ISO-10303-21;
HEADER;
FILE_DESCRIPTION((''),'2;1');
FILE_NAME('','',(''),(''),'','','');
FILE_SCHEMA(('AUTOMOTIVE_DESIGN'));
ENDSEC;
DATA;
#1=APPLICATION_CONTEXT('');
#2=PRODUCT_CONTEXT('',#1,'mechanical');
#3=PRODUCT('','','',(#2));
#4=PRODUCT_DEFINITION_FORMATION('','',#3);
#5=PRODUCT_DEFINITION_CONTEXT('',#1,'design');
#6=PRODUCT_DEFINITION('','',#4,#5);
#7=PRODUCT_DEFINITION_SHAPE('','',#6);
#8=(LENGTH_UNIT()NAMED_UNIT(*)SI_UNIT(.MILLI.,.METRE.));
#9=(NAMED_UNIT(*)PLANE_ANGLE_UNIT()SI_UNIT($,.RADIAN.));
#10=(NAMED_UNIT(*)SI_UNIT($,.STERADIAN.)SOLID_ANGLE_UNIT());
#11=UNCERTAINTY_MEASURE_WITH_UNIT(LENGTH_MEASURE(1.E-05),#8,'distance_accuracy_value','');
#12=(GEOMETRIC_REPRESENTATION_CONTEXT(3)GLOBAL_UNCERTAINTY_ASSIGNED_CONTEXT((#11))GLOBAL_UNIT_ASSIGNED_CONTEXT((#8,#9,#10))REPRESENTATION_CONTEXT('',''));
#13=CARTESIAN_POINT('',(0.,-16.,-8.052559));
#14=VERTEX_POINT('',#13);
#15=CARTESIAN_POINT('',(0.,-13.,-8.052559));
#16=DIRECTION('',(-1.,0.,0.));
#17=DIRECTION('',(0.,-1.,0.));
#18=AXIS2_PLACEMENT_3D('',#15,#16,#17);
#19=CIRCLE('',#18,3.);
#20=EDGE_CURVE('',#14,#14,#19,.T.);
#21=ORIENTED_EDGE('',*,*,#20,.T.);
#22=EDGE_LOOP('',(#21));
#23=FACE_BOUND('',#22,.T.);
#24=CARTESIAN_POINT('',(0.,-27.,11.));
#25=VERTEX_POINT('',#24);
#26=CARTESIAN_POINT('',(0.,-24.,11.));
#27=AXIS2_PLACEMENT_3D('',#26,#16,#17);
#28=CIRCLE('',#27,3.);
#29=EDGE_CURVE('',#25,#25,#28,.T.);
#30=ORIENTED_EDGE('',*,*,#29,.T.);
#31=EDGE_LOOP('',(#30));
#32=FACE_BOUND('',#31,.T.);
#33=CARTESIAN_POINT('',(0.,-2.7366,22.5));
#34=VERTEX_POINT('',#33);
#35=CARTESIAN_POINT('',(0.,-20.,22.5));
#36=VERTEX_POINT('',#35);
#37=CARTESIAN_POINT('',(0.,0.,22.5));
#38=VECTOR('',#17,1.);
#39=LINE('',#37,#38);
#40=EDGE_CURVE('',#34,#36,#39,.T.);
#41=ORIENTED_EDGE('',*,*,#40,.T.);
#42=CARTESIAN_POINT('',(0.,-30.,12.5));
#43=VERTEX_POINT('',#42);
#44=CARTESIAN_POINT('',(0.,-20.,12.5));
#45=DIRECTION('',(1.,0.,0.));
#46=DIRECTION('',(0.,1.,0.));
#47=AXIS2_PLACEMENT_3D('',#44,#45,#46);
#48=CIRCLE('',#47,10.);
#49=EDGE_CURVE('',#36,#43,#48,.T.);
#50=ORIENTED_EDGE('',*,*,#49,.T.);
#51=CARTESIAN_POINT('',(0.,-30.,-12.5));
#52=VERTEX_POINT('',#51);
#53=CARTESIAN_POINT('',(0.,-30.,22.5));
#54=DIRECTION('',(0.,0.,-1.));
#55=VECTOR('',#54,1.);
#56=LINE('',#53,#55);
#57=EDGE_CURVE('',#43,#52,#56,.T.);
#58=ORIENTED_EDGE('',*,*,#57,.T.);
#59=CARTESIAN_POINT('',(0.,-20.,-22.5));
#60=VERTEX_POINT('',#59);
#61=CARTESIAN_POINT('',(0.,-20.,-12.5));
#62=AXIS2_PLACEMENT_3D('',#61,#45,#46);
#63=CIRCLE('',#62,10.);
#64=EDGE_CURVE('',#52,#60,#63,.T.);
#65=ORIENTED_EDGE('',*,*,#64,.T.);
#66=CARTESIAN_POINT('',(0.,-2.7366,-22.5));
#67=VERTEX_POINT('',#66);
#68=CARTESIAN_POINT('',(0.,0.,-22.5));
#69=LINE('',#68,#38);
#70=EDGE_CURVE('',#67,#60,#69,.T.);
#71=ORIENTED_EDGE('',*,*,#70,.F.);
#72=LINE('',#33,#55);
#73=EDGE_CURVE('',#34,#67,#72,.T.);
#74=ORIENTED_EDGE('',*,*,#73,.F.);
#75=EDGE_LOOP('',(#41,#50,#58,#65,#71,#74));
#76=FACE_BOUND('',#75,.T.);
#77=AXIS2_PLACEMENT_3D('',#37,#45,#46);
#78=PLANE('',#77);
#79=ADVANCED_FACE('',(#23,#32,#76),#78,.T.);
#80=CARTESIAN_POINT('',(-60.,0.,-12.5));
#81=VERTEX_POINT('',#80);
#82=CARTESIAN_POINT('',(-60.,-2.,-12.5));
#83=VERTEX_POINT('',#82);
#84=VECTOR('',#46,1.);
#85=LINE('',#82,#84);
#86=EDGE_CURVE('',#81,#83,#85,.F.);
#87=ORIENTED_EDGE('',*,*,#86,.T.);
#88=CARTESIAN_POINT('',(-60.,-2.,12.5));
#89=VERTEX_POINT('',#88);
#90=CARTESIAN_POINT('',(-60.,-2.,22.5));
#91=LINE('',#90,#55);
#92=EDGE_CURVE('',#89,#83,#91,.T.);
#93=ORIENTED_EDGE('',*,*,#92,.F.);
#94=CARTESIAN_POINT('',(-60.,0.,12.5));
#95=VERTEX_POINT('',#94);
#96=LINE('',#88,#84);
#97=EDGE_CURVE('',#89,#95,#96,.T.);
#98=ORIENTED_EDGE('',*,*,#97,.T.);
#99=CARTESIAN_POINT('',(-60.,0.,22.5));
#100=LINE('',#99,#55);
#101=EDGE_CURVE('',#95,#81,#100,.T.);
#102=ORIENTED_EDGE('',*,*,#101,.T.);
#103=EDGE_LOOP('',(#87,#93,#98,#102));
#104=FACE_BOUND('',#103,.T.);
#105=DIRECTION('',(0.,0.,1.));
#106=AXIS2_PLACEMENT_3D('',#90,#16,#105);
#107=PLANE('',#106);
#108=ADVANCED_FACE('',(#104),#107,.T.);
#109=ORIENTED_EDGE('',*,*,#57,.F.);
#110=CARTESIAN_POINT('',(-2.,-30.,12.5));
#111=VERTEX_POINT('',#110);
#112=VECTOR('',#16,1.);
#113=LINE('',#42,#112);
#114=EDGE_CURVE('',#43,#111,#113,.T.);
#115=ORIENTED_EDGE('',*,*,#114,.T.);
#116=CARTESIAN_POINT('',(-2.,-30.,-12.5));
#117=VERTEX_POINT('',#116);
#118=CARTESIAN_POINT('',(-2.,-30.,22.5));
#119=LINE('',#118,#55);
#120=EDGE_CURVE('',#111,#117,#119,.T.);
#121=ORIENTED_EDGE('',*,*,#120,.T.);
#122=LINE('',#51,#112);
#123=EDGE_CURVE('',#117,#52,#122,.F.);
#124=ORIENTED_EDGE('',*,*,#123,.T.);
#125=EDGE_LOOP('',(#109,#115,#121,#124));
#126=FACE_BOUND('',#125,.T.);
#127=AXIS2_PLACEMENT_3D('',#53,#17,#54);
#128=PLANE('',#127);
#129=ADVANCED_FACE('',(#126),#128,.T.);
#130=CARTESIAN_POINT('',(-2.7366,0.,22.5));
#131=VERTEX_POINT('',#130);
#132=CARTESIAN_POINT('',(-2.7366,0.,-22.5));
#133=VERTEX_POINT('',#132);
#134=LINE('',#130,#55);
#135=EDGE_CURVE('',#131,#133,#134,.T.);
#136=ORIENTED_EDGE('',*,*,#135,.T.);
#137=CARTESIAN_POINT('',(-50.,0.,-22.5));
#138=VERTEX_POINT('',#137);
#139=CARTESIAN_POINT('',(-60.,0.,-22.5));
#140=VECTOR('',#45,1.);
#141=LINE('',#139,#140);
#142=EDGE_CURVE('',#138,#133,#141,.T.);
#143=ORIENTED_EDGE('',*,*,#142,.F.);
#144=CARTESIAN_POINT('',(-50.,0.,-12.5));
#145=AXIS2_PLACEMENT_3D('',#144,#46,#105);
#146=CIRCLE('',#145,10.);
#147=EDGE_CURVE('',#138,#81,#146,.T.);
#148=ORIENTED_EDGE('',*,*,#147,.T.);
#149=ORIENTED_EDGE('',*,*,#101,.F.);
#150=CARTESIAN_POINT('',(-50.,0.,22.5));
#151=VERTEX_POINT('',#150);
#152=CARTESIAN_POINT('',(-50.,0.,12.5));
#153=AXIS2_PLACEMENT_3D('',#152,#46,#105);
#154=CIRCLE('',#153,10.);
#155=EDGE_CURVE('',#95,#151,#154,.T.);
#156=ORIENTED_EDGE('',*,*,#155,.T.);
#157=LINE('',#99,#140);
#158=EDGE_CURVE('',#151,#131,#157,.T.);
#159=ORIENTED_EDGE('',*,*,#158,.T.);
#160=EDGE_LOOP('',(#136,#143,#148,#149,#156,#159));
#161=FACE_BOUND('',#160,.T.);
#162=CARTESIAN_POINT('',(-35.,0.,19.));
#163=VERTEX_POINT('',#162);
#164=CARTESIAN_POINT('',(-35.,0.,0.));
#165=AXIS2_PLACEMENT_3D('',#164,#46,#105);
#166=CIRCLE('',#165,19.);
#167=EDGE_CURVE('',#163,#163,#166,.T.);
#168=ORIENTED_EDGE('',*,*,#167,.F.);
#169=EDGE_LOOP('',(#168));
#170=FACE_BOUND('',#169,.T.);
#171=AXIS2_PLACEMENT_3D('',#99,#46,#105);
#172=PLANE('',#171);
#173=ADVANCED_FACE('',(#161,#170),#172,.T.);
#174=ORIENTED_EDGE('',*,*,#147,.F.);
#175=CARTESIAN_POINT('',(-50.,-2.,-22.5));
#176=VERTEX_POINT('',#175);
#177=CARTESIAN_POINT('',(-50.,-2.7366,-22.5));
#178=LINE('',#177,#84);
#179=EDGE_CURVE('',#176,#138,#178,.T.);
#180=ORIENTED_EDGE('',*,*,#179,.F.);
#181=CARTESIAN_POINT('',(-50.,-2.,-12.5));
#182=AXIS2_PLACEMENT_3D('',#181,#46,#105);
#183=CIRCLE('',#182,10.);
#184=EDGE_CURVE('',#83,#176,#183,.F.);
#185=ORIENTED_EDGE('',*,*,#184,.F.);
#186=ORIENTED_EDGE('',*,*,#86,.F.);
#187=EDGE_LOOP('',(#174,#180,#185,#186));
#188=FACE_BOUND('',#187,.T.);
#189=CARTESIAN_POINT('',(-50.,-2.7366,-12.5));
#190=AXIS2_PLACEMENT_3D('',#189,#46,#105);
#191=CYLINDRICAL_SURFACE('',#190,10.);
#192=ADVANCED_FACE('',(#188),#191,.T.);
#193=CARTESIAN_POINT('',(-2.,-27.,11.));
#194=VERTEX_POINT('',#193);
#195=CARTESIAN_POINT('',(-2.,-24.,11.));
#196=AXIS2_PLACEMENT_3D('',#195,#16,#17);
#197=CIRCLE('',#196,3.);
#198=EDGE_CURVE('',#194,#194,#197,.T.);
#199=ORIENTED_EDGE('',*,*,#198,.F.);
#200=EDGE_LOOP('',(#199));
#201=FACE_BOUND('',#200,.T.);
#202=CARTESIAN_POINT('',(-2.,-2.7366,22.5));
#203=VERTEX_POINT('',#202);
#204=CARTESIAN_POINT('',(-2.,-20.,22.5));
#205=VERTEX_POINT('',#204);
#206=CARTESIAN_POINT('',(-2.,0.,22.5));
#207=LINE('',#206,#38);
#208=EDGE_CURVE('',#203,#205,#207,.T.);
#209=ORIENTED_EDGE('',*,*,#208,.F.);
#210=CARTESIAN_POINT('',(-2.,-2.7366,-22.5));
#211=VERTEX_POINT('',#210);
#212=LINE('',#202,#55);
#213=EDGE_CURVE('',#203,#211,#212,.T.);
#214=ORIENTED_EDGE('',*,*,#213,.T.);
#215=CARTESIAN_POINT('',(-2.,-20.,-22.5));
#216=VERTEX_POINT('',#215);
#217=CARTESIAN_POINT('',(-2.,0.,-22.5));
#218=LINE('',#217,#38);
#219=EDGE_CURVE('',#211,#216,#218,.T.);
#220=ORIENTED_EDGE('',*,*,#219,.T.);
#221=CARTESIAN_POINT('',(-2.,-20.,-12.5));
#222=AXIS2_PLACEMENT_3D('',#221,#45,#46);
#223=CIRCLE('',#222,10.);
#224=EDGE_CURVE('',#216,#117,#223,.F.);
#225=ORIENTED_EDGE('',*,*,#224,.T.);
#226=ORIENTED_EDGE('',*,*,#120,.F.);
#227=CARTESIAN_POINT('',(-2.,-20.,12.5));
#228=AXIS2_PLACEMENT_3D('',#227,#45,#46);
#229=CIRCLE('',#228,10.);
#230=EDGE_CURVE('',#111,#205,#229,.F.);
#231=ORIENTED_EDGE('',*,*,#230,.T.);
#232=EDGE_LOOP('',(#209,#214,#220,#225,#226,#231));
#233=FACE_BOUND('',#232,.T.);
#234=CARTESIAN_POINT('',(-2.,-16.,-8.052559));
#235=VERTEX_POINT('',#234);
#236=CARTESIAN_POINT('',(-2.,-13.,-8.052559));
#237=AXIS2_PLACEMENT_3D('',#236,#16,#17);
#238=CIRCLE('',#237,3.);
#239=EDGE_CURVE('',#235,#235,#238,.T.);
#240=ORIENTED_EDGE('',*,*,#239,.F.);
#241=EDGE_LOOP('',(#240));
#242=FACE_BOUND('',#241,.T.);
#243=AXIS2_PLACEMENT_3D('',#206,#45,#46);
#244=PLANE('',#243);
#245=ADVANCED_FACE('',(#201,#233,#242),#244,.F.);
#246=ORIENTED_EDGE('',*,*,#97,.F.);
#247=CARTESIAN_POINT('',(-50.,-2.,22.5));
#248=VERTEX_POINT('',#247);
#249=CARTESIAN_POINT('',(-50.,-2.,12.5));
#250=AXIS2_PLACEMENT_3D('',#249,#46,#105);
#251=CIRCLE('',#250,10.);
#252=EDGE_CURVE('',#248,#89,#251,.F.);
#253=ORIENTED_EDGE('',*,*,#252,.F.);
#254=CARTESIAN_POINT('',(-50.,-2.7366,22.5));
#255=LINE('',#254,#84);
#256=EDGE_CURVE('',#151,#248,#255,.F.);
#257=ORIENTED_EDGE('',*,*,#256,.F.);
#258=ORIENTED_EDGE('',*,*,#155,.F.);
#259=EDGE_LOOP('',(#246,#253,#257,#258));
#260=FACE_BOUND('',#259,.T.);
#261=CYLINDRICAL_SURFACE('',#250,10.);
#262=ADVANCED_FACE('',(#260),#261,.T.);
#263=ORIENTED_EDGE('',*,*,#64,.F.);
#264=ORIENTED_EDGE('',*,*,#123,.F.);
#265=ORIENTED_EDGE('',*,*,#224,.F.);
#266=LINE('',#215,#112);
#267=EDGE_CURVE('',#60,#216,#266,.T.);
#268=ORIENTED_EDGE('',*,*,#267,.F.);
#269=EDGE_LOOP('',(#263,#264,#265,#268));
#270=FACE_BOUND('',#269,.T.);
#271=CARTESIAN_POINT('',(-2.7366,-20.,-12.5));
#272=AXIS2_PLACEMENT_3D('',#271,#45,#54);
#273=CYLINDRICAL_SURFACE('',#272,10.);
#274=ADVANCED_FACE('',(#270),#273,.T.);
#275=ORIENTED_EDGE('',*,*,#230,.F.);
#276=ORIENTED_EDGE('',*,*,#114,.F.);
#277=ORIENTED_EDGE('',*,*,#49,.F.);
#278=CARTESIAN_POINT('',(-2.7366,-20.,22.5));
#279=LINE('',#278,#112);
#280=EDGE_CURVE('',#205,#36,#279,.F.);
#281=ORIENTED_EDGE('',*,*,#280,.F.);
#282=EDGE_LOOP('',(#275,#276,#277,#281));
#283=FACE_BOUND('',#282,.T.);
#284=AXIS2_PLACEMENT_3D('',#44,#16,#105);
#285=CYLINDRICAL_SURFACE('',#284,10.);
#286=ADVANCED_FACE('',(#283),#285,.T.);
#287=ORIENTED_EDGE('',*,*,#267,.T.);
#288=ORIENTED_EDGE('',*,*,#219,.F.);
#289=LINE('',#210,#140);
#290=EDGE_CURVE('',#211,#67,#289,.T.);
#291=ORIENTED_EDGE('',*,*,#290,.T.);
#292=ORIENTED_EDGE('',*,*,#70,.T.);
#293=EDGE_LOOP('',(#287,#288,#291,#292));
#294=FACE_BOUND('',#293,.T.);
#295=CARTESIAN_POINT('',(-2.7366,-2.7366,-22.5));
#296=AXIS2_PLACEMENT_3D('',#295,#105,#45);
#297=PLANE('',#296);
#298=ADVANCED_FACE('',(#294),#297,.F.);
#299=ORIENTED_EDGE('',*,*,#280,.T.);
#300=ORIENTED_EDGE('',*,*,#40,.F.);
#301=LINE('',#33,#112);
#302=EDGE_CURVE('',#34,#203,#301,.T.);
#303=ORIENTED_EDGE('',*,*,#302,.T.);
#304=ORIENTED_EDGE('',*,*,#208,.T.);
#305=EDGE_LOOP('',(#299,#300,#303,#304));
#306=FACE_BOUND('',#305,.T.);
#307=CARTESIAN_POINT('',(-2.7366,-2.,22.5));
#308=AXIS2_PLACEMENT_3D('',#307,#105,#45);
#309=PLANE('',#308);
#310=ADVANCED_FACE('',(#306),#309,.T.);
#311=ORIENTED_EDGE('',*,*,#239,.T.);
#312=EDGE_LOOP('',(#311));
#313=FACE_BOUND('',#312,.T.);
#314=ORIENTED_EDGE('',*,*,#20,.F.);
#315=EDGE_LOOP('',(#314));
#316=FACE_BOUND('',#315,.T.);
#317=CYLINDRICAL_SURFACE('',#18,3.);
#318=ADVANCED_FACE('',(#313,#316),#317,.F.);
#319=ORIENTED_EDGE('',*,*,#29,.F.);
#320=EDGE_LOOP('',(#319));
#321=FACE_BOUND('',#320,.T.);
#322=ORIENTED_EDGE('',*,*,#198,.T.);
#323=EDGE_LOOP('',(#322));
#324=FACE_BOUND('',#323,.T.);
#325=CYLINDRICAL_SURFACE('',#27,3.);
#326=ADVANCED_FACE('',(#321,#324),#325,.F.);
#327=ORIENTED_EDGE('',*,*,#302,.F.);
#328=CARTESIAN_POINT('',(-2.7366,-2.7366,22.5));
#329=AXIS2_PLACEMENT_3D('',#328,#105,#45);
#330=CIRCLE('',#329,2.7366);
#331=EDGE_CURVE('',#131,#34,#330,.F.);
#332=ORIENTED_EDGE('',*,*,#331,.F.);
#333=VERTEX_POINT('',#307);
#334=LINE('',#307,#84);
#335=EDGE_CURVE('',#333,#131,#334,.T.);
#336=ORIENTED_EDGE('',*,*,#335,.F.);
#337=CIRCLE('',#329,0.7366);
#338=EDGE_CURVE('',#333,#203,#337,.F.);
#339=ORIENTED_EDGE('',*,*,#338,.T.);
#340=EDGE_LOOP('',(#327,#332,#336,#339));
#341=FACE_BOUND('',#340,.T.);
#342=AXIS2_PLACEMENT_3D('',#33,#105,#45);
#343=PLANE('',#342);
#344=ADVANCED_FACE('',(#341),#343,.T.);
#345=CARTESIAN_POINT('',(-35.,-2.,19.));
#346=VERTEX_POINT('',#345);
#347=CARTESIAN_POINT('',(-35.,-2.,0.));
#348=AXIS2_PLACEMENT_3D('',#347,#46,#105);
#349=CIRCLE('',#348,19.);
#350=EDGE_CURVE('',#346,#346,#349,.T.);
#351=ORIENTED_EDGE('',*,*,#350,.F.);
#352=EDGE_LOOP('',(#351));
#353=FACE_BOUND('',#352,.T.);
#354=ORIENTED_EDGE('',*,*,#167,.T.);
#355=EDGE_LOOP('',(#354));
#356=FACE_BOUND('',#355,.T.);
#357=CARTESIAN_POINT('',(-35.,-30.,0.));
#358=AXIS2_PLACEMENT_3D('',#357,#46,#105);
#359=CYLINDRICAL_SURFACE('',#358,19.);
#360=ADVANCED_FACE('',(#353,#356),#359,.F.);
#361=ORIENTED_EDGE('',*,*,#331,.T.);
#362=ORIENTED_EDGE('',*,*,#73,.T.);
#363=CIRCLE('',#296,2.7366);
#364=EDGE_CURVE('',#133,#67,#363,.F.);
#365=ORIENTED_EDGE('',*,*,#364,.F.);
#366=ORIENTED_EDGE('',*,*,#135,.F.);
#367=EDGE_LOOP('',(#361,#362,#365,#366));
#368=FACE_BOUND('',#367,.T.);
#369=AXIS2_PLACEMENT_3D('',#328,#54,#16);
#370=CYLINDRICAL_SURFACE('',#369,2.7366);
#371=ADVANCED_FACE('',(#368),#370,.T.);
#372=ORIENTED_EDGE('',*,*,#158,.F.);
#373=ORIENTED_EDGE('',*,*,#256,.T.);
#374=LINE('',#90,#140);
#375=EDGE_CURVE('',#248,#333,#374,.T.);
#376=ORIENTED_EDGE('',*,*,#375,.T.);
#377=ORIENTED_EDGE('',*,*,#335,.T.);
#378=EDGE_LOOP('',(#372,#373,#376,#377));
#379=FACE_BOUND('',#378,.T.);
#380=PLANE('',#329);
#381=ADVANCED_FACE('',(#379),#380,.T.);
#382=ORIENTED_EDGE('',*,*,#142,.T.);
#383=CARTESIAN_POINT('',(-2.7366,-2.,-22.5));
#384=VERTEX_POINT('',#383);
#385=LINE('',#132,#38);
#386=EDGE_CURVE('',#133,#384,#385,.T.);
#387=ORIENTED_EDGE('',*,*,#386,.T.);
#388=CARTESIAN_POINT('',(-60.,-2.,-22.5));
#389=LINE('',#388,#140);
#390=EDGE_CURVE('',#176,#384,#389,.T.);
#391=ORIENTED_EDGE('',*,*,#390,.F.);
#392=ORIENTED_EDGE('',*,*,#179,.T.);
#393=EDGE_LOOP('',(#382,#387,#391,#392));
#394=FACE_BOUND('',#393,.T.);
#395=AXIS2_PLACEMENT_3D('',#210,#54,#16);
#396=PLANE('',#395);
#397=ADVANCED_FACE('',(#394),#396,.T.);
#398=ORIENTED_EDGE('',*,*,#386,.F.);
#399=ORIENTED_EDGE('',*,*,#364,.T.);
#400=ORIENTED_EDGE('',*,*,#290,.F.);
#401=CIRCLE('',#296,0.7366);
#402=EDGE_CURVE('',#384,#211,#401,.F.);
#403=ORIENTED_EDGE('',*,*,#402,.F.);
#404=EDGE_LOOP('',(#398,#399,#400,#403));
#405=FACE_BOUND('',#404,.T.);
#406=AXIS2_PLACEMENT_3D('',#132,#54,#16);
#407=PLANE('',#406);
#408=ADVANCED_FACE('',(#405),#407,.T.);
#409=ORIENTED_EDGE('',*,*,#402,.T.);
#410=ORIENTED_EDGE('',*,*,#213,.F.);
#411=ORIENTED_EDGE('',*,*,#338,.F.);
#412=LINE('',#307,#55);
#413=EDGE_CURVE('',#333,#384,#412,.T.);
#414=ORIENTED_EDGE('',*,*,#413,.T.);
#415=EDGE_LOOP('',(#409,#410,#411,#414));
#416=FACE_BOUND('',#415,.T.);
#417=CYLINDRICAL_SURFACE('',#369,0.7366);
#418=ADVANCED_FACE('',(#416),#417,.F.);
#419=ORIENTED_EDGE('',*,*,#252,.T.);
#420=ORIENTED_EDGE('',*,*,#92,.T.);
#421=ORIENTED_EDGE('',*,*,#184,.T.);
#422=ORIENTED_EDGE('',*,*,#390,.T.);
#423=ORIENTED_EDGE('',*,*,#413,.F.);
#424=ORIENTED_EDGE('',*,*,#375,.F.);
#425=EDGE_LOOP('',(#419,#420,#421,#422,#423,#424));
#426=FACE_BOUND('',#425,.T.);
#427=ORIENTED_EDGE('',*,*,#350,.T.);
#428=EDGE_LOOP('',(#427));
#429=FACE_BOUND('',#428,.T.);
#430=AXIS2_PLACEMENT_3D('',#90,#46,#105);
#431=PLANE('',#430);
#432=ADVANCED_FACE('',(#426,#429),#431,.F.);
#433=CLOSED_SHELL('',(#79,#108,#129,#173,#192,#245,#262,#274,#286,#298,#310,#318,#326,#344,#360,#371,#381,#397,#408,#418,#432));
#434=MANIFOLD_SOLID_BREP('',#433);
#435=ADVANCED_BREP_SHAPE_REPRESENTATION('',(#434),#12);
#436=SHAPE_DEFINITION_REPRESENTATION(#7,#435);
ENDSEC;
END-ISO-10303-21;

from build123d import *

# Parameters (mm, degrees)
SM_BASE_FLANGE_1_DEPTH = 22.5
SKETCH_3_R             = 19
CUT_EXTRUDE_1_DEPTH    = 71.75485849
FILLET_1_R             = 10
SKETCH_6_R             = 3
CUT_EXTRUDE_3_DEPTH    = 70.06699646


# Sheet-metal steps are written as plain solids
with BuildPart() as part:
    # Sketch 1 → 基体-法兰1 (new, symmetric)
    with BuildSketch(Plane.XY):
        with BuildLine():
            Line((-60, 0), (-2.7366, 0))
            ThreePointArc((-2.7366, 0), (-0.801531583, -0.801531583), (0, -2.7366))
            Line((0, -2.7366), (0, -30))
            Line((0, -30), (-2, -30))
            Line((-2, -30), (-2, -2.7366))
            ThreePointArc((-2, -2.7366), (-2.215745145, -2.215745145), (-2.7366, -2))
            Line((-2.7366, -2), (-60, -2))
            Line((-60, -2), (-60, 0))
        make_face()
    extrude(amount=SM_BASE_FLANGE_1_DEPTH, both=True)

    # 草图3 → 切除-拉伸1 (cut, through all)
    with BuildSketch(Plane(origin=(0, 0, 0), x_dir=(1, 0, 0), z_dir=(0, 1, 0))):
        with Locations(Location((-35, 0, 0), (0, 0, 270))):
            Circle(SKETCH_3_R)
    extrude(amount=-CUT_EXTRUDE_1_DEPTH, mode=Mode.SUBTRACT)

    # 圆角1
    fillet_1_edges = [part.edges().sort_by_distance(p)[0] for p in [
        (-60, -1, 22.5),
        (-1, -30, 22.5),
        (-60, -1, -22.5),
        (-1, -30, -22.5),
    ]]
    fillet(fillet_1_edges, radius=FILLET_1_R)

    # 草图6 → 切除-拉伸3 (cut, through all)
    with BuildSketch(Plane.ZY.offset(2)):
        with Locations(Location((11, -24, 0), (0, 0, 270))):
            Circle(SKETCH_6_R)
        with Locations(Location((-8.052558883, -13, 0), (0, 0, 270))):
            Circle(SKETCH_6_R)
    extrude(amount=-CUT_EXTRUDE_3_DEPTH, mode=Mode.SUBTRACT)


solid = part.part
